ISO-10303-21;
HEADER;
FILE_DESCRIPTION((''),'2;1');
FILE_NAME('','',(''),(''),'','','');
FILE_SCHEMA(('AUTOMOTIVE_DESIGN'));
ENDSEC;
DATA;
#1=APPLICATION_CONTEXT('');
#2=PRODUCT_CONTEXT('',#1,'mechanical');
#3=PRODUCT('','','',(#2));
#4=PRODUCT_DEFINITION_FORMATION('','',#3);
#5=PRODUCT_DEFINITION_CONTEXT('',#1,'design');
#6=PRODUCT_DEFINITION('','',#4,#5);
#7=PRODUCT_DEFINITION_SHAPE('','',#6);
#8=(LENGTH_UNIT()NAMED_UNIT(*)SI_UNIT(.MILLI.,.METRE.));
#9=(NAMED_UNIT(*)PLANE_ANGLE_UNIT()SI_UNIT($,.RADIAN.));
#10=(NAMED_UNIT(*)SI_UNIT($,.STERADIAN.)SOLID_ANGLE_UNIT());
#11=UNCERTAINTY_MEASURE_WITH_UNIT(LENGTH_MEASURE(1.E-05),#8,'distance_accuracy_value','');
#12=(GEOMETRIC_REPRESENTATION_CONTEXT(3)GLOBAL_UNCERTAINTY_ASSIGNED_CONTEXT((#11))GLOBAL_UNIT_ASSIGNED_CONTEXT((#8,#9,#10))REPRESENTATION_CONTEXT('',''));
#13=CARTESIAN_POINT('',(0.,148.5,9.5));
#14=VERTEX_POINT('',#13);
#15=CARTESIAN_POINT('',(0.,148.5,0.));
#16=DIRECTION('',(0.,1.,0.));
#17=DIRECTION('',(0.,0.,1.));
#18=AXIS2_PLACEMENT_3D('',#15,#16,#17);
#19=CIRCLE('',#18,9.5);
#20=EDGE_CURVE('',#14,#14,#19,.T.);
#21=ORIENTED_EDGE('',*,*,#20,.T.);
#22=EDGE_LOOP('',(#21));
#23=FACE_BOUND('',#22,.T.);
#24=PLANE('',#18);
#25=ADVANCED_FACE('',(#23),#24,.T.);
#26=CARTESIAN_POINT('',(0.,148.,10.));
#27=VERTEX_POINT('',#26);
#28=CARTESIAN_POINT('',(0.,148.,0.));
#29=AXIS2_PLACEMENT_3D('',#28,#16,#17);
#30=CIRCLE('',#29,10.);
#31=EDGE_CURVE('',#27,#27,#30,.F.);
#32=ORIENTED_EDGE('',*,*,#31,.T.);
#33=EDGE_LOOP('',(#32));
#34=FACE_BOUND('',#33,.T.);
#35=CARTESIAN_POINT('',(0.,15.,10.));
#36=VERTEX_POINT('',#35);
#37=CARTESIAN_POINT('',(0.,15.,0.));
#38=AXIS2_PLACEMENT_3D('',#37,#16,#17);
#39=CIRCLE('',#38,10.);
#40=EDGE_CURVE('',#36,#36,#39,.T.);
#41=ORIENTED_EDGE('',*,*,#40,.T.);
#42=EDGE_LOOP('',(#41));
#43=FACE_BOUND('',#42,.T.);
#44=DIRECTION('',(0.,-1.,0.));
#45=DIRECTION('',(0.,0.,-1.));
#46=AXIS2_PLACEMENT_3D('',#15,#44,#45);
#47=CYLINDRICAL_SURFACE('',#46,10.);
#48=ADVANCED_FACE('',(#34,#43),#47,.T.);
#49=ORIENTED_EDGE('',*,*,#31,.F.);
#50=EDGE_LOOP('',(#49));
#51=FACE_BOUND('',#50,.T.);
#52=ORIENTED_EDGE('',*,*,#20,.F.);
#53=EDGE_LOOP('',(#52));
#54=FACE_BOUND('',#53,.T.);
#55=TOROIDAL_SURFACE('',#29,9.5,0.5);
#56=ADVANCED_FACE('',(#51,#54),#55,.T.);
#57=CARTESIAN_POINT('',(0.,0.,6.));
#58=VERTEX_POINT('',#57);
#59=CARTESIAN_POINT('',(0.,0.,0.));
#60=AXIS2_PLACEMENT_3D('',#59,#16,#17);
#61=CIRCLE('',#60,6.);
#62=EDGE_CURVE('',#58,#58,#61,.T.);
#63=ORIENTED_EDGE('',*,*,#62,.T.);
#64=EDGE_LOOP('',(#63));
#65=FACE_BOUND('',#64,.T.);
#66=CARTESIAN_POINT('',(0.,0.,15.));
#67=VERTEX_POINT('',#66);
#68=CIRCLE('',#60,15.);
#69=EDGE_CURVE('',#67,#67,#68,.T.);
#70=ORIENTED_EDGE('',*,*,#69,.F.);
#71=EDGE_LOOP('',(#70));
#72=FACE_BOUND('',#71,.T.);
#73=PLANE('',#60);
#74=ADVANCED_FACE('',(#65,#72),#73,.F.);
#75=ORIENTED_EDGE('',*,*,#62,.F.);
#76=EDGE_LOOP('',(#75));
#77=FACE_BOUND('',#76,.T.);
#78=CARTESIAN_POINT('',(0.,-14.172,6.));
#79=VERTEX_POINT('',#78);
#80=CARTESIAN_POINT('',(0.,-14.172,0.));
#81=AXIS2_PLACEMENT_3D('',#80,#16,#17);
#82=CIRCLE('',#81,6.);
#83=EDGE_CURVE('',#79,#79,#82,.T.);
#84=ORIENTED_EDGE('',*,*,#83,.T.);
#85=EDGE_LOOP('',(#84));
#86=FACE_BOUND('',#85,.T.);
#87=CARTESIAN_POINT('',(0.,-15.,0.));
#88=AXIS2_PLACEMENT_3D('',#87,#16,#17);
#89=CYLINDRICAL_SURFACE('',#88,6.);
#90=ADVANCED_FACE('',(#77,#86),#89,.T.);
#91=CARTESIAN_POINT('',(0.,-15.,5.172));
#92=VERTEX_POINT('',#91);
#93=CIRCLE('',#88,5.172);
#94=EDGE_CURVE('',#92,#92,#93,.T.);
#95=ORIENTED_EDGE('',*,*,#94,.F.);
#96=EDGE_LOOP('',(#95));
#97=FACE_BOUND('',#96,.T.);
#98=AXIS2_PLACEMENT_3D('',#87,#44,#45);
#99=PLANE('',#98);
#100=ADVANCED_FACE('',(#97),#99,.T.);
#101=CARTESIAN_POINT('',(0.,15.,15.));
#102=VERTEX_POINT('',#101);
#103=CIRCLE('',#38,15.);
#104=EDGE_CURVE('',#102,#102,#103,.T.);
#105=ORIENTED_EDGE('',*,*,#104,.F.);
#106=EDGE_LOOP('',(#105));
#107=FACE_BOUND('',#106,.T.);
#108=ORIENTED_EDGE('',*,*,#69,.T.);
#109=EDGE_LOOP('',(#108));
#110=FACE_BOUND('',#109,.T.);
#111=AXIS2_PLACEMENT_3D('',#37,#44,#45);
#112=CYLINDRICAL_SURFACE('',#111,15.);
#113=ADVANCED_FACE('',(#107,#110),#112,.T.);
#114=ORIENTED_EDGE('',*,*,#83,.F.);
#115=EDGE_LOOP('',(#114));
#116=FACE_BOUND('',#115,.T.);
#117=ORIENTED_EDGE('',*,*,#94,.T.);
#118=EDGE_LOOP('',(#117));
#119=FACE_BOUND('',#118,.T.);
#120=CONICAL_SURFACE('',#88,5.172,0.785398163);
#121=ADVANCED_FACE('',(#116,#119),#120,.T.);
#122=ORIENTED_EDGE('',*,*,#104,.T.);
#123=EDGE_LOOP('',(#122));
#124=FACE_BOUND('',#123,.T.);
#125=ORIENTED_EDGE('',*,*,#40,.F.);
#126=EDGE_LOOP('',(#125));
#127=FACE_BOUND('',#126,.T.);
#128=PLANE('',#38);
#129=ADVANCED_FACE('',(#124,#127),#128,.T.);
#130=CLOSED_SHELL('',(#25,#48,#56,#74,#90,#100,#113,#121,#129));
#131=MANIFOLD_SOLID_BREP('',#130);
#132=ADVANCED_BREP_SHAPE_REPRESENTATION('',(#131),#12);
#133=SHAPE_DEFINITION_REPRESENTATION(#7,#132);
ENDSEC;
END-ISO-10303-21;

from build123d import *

# Parameters (mm, degrees)
SKETCH1_R           = 15
BOSS_EXTRUDE1_DEPTH = 15
SKETCH2_R           = 10
BOSS_EXTRUDE2_DEPTH = 133.5
SKETCH4_R           = 7.5
BOSS_EXTRUDE3_DEPTH = 15
FILLET1_R           = 0.5


# Read off the part's stored shape, not the designer's step: M12x1.5 Machine Threads Stud1
with BuildPart() as part:
    # Sketch1 → Boss-Extrude1 (new body)
    with BuildSketch(Plane(origin=(0, 0, 0), x_dir=(1, 0, 0), z_dir=(0, 1, 0))):
        with Locations(Location((0, 0, 0), (0, 0, 270))):
            Circle(SKETCH1_R)
    extrude(amount=BOSS_EXTRUDE1_DEPTH)

    # Sketch2 → Boss-Extrude2 (add)
    with BuildSketch(Plane(origin=(0, 15, 0), x_dir=(1, 0, 0), z_dir=(0, 1, 0))):
        with Locations(Location((0, 0, 0), (0, 0, 270))):
            Circle(SKETCH2_R)
    extrude(amount=BOSS_EXTRUDE2_DEPTH)

    # Sketch4 → Boss-Extrude3 (add)
    with BuildSketch(Plane.XZ):
        with Locations(Location((0, 0, 0), (0, 0, 270))):
            Circle(SKETCH4_R)
    extrude(amount=BOSS_EXTRUDE3_DEPTH)

    # M12x1.5 Machine Threads Stud1 outline → M12x1.5 Machine Threads Stud1 (revolve, cut)
    with BuildSketch(Plane.XY):
        Polygon((7.5, 0), (6, 0), (6, -14.172), (5.172, -15), (7.5, -15), align=None)
    revolve(axis=Axis((0, 0, 0), (0, 1, 0)), mode=Mode.SUBTRACT)

    # Fillet1
    fillet1_edges = [part.edges().sort_by_distance(p)[0] for p in [
        (0, 148.5, -10),
    ]]
    fillet(fillet1_edges, radius=FILLET1_R)


solid = part.part
